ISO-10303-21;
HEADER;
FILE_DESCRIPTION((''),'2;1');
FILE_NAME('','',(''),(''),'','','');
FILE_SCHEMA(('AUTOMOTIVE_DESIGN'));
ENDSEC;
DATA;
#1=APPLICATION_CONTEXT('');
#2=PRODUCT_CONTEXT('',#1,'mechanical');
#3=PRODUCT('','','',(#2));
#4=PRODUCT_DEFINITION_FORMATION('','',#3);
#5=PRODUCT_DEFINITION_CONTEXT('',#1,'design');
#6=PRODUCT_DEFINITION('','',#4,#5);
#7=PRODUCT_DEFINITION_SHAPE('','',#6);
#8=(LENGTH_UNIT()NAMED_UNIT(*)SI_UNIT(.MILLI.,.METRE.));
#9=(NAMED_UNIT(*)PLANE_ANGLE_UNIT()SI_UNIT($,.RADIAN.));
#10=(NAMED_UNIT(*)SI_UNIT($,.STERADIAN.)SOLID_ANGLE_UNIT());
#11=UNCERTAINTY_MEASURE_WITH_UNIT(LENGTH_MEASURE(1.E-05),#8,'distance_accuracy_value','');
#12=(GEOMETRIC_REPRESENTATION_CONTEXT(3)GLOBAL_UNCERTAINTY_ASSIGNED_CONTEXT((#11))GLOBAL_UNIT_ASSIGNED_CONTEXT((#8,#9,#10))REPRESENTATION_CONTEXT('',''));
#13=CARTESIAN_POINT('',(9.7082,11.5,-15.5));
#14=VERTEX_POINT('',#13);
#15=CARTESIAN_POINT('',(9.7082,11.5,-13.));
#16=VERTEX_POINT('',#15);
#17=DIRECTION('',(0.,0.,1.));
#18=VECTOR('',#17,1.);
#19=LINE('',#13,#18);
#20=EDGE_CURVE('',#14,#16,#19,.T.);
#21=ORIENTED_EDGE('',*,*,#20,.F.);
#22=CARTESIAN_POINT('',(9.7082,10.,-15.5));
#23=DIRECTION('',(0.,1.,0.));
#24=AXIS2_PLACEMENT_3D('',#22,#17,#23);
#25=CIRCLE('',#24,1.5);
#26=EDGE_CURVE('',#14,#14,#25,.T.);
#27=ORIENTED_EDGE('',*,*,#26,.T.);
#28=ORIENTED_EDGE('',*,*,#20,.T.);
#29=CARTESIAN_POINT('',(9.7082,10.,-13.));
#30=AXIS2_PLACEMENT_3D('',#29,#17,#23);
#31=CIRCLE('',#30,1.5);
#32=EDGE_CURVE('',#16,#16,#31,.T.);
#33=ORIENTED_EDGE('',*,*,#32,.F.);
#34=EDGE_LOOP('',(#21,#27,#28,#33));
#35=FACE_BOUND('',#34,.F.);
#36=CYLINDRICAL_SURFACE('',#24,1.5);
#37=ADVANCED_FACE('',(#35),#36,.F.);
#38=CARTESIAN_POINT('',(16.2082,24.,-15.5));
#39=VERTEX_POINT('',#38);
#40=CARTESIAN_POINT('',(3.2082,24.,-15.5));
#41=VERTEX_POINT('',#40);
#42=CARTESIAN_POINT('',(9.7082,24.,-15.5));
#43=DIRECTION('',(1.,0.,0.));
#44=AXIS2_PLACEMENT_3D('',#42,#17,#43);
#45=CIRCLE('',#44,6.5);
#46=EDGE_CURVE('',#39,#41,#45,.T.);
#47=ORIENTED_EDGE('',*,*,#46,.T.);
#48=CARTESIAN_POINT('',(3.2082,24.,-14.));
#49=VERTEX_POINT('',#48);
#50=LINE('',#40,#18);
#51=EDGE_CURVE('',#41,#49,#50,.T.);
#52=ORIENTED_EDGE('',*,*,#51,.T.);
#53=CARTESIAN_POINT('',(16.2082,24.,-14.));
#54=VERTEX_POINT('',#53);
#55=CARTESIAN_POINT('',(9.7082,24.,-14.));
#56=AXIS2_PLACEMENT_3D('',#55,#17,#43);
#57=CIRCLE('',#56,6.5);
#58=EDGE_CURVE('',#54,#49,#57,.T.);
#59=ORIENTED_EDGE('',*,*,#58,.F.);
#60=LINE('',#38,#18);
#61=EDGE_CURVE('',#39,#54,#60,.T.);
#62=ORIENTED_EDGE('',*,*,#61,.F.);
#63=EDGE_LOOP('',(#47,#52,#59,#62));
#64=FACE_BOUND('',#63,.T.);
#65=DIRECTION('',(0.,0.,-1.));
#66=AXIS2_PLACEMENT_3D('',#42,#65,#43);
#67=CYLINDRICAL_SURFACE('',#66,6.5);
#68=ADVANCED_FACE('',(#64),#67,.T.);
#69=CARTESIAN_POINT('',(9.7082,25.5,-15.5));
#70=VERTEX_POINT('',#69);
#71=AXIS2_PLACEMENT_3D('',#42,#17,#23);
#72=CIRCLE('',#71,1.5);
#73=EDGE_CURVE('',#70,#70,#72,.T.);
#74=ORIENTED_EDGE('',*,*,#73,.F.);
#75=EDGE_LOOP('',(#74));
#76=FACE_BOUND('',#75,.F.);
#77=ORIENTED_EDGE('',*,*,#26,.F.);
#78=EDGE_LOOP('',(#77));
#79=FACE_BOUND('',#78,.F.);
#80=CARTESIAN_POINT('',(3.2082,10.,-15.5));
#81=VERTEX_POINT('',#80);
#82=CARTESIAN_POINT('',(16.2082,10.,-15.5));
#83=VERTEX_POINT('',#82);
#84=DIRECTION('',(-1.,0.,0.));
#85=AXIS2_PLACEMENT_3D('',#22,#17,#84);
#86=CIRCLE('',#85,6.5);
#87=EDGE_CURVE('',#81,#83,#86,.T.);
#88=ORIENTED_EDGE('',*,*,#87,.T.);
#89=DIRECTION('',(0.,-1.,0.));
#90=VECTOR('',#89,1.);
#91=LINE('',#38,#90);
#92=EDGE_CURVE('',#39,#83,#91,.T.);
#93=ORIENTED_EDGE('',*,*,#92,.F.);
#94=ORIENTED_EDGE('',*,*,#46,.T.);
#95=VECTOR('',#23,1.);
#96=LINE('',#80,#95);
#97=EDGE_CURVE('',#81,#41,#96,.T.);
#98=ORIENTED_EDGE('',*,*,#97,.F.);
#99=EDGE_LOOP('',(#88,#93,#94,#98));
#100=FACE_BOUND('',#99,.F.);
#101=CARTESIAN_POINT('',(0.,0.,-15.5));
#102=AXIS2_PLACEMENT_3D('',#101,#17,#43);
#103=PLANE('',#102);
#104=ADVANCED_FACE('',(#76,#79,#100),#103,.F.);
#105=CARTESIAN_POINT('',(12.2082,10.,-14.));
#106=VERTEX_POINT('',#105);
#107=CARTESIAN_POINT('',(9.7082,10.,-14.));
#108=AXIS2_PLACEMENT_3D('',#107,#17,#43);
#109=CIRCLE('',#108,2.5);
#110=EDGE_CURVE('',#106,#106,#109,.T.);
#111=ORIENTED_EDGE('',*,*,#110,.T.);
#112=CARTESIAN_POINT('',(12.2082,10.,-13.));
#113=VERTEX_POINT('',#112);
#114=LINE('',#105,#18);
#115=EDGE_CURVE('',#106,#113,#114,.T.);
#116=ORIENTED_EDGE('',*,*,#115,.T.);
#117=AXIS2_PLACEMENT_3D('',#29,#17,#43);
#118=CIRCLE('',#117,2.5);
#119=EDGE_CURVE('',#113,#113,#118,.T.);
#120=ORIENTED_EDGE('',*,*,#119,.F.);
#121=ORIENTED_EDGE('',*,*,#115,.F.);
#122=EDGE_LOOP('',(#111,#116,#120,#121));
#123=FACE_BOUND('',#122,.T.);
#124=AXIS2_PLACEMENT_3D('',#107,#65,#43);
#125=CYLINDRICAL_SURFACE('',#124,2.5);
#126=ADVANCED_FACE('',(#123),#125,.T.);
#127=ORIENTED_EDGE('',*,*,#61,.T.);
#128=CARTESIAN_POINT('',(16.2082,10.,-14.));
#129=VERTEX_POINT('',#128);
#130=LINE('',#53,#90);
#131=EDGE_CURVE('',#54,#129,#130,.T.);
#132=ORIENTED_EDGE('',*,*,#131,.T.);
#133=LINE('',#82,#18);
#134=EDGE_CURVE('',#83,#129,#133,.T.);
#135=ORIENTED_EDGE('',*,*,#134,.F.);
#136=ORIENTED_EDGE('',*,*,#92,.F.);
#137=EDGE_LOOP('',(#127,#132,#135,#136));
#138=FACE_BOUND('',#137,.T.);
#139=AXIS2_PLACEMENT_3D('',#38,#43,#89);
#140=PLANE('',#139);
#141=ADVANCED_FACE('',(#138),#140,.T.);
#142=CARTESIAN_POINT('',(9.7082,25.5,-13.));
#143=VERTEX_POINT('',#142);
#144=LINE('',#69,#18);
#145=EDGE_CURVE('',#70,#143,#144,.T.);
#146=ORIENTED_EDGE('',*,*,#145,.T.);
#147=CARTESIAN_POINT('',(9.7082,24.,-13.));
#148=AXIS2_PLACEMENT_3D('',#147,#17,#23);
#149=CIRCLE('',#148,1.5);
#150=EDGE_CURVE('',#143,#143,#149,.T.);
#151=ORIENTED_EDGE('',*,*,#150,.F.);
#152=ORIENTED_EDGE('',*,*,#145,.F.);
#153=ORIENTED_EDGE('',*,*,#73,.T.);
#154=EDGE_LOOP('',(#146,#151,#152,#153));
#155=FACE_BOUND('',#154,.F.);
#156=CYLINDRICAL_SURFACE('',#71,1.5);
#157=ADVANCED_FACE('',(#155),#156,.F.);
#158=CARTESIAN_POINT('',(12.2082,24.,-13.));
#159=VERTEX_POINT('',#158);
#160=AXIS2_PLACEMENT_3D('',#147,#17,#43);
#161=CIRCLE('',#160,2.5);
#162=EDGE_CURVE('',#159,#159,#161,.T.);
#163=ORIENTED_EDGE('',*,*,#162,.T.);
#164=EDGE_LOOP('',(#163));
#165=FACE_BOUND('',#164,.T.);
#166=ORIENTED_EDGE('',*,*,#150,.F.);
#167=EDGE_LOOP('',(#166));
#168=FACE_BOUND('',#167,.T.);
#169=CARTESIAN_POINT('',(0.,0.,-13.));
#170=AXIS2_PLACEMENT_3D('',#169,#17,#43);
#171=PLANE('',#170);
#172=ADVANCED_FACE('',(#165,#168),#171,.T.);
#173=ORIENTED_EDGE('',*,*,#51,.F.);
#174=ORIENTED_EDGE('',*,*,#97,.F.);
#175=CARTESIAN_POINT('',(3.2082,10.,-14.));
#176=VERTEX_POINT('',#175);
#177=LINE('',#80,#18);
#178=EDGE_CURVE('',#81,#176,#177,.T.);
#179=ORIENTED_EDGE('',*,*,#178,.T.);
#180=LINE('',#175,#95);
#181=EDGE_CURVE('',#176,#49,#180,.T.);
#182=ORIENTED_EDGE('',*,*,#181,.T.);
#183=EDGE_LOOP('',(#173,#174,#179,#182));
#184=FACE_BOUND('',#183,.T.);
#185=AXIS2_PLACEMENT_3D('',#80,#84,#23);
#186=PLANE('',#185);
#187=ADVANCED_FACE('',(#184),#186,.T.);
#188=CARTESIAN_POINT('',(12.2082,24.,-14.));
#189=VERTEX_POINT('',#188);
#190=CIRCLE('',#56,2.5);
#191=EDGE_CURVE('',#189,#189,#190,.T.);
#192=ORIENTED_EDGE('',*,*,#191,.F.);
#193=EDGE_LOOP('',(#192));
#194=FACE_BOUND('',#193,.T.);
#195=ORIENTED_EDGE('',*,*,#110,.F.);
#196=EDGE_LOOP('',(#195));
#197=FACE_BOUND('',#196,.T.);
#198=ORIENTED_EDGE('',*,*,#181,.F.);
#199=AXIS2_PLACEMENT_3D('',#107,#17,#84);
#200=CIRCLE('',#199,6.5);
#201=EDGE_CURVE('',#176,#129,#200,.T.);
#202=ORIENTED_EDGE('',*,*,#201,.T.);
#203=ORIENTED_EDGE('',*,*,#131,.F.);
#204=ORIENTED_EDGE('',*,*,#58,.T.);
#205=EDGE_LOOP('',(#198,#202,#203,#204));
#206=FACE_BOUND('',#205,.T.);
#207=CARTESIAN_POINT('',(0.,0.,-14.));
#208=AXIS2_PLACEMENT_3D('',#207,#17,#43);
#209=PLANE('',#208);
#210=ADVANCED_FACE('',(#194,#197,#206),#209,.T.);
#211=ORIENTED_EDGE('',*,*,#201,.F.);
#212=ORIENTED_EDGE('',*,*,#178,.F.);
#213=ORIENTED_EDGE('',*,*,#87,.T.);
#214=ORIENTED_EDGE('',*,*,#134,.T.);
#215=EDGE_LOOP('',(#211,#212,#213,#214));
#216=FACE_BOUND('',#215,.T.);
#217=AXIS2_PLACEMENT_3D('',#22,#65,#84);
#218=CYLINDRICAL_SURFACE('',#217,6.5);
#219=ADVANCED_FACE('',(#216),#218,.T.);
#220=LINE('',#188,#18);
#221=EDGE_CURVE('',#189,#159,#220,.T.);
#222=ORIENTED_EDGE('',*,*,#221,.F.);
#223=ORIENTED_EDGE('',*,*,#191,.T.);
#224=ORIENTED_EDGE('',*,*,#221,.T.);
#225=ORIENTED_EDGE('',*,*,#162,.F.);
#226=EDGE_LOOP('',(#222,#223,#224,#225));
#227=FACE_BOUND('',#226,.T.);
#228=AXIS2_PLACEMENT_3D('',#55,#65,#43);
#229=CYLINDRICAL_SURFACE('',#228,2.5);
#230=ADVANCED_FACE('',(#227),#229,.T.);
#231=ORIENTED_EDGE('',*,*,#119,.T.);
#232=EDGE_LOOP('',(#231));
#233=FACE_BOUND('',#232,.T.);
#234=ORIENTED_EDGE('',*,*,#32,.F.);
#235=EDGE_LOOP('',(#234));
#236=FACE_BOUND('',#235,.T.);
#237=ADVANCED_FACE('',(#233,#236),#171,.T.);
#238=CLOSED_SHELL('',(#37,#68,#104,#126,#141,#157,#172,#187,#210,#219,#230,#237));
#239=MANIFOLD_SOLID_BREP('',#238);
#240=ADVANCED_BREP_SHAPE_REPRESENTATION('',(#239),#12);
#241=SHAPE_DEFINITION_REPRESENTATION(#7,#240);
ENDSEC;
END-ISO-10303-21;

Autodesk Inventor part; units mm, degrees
ref_plane "YZ Plane" through (0, 0, 0) normal (1, 0, 0) x (0, 1, 0)
ref_plane "XZ Plane" through (0, 0, 0) normal (0, 1, 0) x (-1, 0, 0)
ref_plane "Work Plane1" through (0, 0, -15.5) normal (0, 0, 1) x (1, 0, 0)
sketch "Sketch1" plane through (0, 0, -15.5) normal (0, 0, 1) x (1, 0, 0)
  arc A0 (3.2082, 10) -> (16.2082, 10) centre (9.7082, 10) ccw
  line L0 (16.2082, 24) -> (16.2082, 10)
  line L1 (3.2082, 10) -> (3.2082, 24)
  arc A1 (16.2082, 24) -> (3.2082, 24) centre (9.7082, 24) ccw
extrude "Extrusion3" add sketch "Sketch1" along normal blind 1.5
sketch "Sketch2" plane through (0, 0, -14) normal (0, 0, 1) x (1, 0, 0)
  circle A0 centre (9.7082, 10) radius 2.5
extrude "Extrusion2" add sketch "Sketch2" along normal blind 1
sketch "Sketch3" plane through (0, 0, -14) normal (0, 0, 1) x (1, 0, 0)
  circle A0 centre (9.7082, 24) radius 2.5
extrude "Extrusion1" add sketch "Sketch3" along normal blind 1
hole "Hole2" at (9.7082, 10, -15.5) direction (0, 0, 1) diameter 3 depth 2.5
sketch "Sketch4" plane through (0, 0, -15.5) normal (0, 0, 1) x (1, 0, 0)
  point P0 (9.7082, 10)
hole "Hole1" at (9.7082, 24, -15.5) direction (0, 0, 1) diameter 3 depth 2.5
sketch "Sketch5" plane through (0, 0, -15.5) normal (0, 0, 1) x (1, 0, 0)
  point P0 (9.7082, 24)
